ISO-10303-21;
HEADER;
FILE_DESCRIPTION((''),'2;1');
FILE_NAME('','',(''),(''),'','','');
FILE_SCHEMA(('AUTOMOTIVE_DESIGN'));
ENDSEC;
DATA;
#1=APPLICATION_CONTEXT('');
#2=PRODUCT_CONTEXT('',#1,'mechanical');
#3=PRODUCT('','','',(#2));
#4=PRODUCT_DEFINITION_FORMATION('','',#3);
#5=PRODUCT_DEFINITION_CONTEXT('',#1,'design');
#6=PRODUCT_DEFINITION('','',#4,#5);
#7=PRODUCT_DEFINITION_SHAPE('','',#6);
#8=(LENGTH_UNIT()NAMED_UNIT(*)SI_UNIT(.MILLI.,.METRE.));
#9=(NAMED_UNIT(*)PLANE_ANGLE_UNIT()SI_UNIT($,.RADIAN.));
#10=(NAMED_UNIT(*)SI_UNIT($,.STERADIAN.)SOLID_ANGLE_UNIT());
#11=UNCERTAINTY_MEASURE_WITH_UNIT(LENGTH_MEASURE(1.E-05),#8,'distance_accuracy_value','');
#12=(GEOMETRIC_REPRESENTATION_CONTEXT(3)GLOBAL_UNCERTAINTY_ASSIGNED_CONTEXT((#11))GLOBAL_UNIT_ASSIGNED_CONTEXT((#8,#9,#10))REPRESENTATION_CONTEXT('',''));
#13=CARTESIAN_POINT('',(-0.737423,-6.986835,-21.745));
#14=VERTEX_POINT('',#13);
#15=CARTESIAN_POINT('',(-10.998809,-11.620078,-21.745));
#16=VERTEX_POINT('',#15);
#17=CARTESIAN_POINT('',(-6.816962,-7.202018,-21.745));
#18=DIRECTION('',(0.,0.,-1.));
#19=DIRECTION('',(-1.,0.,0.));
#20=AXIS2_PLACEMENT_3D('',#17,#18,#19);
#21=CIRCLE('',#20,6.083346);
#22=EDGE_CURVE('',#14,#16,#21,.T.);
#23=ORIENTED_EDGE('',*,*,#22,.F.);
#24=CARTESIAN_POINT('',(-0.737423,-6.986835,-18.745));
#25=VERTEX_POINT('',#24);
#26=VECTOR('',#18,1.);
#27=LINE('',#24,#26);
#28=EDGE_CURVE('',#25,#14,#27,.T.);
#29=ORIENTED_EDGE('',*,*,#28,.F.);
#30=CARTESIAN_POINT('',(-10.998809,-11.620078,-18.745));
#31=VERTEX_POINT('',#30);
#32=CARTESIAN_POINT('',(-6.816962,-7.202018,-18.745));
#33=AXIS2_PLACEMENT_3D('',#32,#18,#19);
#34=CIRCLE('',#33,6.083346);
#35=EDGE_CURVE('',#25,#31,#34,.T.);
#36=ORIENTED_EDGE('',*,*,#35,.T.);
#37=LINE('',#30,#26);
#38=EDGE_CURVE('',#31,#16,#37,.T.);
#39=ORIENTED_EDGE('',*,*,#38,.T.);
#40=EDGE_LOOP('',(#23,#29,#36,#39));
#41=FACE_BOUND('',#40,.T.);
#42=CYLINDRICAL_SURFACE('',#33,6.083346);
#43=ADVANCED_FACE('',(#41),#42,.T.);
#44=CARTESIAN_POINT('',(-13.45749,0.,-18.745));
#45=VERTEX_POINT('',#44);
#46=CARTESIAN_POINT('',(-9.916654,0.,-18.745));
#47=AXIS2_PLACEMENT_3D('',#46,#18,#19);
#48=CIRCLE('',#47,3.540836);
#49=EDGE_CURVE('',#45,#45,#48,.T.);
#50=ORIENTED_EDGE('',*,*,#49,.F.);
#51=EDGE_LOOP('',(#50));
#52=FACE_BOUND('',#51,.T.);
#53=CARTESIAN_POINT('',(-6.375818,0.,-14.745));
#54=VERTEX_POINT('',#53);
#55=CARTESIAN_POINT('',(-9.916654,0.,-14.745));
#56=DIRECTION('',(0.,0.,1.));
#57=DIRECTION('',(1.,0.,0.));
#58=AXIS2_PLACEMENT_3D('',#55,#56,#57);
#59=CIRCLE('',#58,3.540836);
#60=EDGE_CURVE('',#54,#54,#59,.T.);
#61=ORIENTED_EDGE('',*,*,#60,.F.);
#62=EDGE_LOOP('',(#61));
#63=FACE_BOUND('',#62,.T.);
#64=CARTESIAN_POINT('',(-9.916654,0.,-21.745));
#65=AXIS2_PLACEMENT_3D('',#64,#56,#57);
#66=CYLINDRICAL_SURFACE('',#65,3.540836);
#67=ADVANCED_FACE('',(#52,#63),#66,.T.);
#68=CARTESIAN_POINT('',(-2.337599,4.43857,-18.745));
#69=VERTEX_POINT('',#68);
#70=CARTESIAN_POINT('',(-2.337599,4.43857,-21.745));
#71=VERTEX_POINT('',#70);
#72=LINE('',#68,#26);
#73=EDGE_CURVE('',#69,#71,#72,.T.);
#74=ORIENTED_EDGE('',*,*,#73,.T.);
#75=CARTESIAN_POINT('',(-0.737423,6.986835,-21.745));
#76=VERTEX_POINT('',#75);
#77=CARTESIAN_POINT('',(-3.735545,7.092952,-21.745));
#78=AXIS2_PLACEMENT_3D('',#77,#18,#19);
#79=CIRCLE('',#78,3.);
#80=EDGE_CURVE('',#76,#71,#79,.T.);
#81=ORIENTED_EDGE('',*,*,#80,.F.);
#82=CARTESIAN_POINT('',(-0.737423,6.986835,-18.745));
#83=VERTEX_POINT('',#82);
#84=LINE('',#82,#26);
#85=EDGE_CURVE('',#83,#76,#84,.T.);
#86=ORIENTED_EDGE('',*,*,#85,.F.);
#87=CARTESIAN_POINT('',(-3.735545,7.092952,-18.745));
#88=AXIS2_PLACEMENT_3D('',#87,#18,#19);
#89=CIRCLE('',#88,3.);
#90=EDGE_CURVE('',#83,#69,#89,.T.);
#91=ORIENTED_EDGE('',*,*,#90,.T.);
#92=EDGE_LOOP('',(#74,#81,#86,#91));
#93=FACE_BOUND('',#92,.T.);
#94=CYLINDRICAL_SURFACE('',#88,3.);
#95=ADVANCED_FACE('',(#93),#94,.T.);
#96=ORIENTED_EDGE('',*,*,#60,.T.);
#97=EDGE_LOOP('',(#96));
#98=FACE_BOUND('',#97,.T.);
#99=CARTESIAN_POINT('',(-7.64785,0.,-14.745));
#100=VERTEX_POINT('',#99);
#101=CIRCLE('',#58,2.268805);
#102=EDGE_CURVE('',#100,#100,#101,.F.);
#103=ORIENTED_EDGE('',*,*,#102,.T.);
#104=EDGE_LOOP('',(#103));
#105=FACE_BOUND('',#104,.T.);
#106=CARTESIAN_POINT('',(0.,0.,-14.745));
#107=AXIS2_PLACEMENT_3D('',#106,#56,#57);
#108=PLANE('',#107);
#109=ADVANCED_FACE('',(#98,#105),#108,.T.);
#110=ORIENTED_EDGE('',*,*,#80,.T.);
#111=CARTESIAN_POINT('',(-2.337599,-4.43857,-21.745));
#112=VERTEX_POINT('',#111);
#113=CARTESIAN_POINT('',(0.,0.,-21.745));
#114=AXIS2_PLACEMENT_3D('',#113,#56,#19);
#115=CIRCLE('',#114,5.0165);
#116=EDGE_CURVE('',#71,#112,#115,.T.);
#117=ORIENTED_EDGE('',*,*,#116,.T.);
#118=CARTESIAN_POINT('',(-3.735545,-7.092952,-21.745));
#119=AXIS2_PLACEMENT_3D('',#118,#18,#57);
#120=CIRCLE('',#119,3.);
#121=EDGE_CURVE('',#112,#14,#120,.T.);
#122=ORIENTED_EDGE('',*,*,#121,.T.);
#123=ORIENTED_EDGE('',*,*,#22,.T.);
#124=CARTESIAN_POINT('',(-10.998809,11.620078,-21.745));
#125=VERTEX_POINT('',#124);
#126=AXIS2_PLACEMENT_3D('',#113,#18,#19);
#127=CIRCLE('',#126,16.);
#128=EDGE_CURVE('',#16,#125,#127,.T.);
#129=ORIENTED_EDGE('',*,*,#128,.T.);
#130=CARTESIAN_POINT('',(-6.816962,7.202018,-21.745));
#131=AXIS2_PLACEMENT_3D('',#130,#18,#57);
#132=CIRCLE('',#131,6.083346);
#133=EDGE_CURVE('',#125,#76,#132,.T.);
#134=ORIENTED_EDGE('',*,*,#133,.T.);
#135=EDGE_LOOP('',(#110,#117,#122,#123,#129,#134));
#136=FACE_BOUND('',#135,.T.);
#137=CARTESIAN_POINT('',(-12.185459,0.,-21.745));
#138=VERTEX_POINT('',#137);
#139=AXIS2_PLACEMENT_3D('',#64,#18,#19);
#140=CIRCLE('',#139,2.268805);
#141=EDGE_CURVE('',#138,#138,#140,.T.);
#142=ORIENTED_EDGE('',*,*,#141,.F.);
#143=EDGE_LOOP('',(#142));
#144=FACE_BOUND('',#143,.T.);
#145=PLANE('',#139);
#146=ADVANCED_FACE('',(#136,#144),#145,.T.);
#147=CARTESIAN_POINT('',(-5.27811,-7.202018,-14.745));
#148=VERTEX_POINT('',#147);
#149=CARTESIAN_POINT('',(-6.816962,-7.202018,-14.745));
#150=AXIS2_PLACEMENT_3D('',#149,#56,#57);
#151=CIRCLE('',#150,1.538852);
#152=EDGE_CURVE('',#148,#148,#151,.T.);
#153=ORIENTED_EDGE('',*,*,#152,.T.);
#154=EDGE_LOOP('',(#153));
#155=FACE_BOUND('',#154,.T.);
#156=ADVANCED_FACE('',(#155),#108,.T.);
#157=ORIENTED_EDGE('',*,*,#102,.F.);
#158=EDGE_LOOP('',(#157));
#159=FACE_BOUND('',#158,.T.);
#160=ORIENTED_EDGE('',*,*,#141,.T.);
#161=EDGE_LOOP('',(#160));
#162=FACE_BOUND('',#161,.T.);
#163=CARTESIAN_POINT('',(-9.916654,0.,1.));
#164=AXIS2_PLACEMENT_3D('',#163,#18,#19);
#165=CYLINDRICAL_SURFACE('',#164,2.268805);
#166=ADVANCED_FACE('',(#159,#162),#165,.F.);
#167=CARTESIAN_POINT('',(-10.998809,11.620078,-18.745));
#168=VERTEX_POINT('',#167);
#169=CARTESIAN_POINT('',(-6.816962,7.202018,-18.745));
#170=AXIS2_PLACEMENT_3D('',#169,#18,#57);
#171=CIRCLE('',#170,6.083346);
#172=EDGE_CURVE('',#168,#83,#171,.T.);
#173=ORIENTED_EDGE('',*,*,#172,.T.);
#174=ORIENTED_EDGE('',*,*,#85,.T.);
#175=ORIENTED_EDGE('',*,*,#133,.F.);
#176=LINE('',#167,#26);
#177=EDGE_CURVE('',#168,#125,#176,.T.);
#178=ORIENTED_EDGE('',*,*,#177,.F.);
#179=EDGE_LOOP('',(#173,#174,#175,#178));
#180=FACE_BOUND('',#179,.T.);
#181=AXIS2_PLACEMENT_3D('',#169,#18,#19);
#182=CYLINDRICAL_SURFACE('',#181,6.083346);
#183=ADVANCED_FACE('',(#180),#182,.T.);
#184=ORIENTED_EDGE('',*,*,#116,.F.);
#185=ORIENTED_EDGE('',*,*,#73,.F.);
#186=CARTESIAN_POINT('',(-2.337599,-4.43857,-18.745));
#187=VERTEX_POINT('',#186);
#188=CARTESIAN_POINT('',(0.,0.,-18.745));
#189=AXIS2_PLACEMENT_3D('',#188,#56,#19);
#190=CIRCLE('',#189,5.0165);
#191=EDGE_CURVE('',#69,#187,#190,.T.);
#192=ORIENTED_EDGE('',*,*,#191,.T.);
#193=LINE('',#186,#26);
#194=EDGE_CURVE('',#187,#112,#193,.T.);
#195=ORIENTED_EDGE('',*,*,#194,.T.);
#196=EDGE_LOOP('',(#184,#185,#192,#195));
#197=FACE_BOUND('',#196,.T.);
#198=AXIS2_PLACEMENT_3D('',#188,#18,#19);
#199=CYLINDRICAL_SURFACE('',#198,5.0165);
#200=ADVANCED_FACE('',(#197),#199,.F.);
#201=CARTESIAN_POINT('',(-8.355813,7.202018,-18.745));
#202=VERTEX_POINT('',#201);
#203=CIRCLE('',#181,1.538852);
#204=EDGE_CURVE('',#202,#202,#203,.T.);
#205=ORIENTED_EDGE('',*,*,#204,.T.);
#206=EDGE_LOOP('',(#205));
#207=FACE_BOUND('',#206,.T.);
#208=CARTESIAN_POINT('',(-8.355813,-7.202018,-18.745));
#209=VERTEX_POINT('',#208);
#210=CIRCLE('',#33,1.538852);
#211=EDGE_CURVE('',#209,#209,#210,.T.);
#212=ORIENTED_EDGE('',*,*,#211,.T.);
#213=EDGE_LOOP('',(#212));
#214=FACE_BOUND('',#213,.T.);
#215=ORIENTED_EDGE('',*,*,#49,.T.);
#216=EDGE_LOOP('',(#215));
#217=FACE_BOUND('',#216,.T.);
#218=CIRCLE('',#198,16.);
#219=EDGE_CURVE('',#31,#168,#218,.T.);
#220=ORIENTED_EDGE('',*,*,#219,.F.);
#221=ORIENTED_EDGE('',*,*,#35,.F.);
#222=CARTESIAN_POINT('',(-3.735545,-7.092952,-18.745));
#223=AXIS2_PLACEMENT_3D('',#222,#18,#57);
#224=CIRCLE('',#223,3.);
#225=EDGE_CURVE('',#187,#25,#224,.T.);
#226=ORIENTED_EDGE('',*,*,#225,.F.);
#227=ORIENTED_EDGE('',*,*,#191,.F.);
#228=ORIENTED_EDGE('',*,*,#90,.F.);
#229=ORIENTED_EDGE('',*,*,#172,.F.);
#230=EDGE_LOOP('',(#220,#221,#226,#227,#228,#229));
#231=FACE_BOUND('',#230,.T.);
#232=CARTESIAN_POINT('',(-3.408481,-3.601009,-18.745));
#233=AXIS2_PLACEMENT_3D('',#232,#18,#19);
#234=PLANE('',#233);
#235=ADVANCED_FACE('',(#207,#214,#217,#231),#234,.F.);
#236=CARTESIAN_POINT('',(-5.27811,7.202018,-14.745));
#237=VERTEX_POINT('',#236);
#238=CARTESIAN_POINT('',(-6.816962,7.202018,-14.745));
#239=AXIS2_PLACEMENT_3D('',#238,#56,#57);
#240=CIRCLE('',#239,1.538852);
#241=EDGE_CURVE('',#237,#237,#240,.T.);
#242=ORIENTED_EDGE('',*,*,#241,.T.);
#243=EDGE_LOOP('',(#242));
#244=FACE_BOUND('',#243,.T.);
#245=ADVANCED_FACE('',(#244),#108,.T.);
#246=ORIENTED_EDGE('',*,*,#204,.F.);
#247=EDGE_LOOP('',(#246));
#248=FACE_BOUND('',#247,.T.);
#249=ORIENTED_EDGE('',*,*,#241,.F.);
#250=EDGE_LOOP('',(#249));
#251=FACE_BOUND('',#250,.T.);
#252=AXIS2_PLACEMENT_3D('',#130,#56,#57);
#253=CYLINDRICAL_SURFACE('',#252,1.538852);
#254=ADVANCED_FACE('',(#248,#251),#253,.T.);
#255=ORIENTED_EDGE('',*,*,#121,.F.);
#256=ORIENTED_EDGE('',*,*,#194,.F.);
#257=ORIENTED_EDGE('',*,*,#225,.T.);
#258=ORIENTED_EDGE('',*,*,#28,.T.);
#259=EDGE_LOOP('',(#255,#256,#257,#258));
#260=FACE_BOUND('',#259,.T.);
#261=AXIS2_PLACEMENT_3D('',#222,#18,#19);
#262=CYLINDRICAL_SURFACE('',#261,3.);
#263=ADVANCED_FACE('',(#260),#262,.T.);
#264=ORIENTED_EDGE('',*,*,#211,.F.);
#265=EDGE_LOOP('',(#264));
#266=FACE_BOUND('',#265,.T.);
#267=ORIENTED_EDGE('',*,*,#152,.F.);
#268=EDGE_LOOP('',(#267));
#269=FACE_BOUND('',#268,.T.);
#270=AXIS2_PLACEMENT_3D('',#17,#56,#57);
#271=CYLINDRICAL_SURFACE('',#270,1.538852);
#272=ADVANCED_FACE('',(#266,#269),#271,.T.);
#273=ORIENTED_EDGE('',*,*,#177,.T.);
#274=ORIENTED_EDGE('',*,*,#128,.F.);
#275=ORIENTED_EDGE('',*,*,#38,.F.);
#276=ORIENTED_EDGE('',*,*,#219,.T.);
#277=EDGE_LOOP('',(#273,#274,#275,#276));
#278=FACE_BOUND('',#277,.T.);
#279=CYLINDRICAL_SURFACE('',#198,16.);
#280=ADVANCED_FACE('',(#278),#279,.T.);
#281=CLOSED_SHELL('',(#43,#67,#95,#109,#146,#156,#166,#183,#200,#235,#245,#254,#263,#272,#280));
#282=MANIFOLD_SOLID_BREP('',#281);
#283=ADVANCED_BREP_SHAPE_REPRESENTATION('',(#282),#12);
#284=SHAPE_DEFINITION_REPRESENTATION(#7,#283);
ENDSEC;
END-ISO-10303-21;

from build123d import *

# Parameters (mm, degrees)
PART2_1_START         = -21.745
PART2_1_OUTLINE_R     = 2.268804718
PART2_1_DEPTH         = 3
PART2_1_START_2       = -18.745
PART2_1_2_OUTLINE_R   = 1.538851722
PART2_1_2_OUTLINE_R_2 = 3.540835997
PART2_1_2_OUTLINE_R_3 = 2.268804718
PART2_1_2_DEPTH       = 5
SKETCH_1_W            = 9.919146705
SKETCH_1_H            = 22.592426062
CUT_EXTRUDE_1_DEPTH   = 1


# Read off the part's stored shape, not the designer's step: 基体零件-part2-1
with BuildPart() as part:
    # 基体零件-part2-1 outline → 基体零件-part2-1 (new body)
    with BuildSketch(Plane.XY.offset(PART2_1_START)):
        with BuildLine():
            ThreePointArc((-0.73742282, -6.986834522), (-1.194921758, -5.497574164), (-2.33759914, -4.438569872))
            ThreePointArc((-2.33759914, -4.438569872), (-5.0165, 0), (-2.33759914, 4.438569872))
            ThreePointArc((-2.33759914, 4.438569872), (-1.194921758, 5.497574164), (-0.73742282, 6.986834522))
            ThreePointArc((-0.73742282, 6.986834522), (-4.313555127, 12.746389448), (-10.998808821, 11.620077647))
            ThreePointArc((-10.998808821, 11.620077647), (-16, 0), (-10.998808821, -11.620077647))
            ThreePointArc((-10.998808821, -11.620077647), (-4.313555127, -12.746389448), (-0.73742282, -6.986834522))
        make_face()
        with Locations((-9.916654285, 0)):
            Circle(PART2_1_OUTLINE_R, mode=Mode.SUBTRACT)
    extrude(amount=PART2_1_DEPTH)

    # part2-1 2 outline → part2-1 2 (add)
    # profile 1 of 3: a face of its own
    with BuildSketch(Plane.XY.offset(PART2_1_START_2)):
        with Locations((-6.816961539, -7.2020183)):
            Circle(PART2_1_2_OUTLINE_R)
    # profile 2 of 3: a face of its own
    with BuildSketch(Plane.XY.offset(PART2_1_START_2)):
        with Locations((-9.916654285, 0)):
            Circle(PART2_1_2_OUTLINE_R_2)
        with Locations((-9.916654285, 0)):
            Circle(PART2_1_2_OUTLINE_R_3, mode=Mode.SUBTRACT)
    # profile 3 of 3: a face of its own
    with BuildSketch(Plane.XY.offset(PART2_1_START_2)):
        with Locations((-6.816961539, 7.2020183)):
            Circle(PART2_1_2_OUTLINE_R)
    extrude(amount=PART2_1_2_DEPTH)

    # 草图1 → 切除-拉伸1 (cut)
    with BuildSketch(Plane.XY.offset(-13.745)):
        with Locations((-9.361869936, 0)):
            Rectangle(SKETCH_1_W, SKETCH_1_H)
    extrude(amount=-CUT_EXTRUDE_1_DEPTH, mode=Mode.SUBTRACT)


solid = part.part
